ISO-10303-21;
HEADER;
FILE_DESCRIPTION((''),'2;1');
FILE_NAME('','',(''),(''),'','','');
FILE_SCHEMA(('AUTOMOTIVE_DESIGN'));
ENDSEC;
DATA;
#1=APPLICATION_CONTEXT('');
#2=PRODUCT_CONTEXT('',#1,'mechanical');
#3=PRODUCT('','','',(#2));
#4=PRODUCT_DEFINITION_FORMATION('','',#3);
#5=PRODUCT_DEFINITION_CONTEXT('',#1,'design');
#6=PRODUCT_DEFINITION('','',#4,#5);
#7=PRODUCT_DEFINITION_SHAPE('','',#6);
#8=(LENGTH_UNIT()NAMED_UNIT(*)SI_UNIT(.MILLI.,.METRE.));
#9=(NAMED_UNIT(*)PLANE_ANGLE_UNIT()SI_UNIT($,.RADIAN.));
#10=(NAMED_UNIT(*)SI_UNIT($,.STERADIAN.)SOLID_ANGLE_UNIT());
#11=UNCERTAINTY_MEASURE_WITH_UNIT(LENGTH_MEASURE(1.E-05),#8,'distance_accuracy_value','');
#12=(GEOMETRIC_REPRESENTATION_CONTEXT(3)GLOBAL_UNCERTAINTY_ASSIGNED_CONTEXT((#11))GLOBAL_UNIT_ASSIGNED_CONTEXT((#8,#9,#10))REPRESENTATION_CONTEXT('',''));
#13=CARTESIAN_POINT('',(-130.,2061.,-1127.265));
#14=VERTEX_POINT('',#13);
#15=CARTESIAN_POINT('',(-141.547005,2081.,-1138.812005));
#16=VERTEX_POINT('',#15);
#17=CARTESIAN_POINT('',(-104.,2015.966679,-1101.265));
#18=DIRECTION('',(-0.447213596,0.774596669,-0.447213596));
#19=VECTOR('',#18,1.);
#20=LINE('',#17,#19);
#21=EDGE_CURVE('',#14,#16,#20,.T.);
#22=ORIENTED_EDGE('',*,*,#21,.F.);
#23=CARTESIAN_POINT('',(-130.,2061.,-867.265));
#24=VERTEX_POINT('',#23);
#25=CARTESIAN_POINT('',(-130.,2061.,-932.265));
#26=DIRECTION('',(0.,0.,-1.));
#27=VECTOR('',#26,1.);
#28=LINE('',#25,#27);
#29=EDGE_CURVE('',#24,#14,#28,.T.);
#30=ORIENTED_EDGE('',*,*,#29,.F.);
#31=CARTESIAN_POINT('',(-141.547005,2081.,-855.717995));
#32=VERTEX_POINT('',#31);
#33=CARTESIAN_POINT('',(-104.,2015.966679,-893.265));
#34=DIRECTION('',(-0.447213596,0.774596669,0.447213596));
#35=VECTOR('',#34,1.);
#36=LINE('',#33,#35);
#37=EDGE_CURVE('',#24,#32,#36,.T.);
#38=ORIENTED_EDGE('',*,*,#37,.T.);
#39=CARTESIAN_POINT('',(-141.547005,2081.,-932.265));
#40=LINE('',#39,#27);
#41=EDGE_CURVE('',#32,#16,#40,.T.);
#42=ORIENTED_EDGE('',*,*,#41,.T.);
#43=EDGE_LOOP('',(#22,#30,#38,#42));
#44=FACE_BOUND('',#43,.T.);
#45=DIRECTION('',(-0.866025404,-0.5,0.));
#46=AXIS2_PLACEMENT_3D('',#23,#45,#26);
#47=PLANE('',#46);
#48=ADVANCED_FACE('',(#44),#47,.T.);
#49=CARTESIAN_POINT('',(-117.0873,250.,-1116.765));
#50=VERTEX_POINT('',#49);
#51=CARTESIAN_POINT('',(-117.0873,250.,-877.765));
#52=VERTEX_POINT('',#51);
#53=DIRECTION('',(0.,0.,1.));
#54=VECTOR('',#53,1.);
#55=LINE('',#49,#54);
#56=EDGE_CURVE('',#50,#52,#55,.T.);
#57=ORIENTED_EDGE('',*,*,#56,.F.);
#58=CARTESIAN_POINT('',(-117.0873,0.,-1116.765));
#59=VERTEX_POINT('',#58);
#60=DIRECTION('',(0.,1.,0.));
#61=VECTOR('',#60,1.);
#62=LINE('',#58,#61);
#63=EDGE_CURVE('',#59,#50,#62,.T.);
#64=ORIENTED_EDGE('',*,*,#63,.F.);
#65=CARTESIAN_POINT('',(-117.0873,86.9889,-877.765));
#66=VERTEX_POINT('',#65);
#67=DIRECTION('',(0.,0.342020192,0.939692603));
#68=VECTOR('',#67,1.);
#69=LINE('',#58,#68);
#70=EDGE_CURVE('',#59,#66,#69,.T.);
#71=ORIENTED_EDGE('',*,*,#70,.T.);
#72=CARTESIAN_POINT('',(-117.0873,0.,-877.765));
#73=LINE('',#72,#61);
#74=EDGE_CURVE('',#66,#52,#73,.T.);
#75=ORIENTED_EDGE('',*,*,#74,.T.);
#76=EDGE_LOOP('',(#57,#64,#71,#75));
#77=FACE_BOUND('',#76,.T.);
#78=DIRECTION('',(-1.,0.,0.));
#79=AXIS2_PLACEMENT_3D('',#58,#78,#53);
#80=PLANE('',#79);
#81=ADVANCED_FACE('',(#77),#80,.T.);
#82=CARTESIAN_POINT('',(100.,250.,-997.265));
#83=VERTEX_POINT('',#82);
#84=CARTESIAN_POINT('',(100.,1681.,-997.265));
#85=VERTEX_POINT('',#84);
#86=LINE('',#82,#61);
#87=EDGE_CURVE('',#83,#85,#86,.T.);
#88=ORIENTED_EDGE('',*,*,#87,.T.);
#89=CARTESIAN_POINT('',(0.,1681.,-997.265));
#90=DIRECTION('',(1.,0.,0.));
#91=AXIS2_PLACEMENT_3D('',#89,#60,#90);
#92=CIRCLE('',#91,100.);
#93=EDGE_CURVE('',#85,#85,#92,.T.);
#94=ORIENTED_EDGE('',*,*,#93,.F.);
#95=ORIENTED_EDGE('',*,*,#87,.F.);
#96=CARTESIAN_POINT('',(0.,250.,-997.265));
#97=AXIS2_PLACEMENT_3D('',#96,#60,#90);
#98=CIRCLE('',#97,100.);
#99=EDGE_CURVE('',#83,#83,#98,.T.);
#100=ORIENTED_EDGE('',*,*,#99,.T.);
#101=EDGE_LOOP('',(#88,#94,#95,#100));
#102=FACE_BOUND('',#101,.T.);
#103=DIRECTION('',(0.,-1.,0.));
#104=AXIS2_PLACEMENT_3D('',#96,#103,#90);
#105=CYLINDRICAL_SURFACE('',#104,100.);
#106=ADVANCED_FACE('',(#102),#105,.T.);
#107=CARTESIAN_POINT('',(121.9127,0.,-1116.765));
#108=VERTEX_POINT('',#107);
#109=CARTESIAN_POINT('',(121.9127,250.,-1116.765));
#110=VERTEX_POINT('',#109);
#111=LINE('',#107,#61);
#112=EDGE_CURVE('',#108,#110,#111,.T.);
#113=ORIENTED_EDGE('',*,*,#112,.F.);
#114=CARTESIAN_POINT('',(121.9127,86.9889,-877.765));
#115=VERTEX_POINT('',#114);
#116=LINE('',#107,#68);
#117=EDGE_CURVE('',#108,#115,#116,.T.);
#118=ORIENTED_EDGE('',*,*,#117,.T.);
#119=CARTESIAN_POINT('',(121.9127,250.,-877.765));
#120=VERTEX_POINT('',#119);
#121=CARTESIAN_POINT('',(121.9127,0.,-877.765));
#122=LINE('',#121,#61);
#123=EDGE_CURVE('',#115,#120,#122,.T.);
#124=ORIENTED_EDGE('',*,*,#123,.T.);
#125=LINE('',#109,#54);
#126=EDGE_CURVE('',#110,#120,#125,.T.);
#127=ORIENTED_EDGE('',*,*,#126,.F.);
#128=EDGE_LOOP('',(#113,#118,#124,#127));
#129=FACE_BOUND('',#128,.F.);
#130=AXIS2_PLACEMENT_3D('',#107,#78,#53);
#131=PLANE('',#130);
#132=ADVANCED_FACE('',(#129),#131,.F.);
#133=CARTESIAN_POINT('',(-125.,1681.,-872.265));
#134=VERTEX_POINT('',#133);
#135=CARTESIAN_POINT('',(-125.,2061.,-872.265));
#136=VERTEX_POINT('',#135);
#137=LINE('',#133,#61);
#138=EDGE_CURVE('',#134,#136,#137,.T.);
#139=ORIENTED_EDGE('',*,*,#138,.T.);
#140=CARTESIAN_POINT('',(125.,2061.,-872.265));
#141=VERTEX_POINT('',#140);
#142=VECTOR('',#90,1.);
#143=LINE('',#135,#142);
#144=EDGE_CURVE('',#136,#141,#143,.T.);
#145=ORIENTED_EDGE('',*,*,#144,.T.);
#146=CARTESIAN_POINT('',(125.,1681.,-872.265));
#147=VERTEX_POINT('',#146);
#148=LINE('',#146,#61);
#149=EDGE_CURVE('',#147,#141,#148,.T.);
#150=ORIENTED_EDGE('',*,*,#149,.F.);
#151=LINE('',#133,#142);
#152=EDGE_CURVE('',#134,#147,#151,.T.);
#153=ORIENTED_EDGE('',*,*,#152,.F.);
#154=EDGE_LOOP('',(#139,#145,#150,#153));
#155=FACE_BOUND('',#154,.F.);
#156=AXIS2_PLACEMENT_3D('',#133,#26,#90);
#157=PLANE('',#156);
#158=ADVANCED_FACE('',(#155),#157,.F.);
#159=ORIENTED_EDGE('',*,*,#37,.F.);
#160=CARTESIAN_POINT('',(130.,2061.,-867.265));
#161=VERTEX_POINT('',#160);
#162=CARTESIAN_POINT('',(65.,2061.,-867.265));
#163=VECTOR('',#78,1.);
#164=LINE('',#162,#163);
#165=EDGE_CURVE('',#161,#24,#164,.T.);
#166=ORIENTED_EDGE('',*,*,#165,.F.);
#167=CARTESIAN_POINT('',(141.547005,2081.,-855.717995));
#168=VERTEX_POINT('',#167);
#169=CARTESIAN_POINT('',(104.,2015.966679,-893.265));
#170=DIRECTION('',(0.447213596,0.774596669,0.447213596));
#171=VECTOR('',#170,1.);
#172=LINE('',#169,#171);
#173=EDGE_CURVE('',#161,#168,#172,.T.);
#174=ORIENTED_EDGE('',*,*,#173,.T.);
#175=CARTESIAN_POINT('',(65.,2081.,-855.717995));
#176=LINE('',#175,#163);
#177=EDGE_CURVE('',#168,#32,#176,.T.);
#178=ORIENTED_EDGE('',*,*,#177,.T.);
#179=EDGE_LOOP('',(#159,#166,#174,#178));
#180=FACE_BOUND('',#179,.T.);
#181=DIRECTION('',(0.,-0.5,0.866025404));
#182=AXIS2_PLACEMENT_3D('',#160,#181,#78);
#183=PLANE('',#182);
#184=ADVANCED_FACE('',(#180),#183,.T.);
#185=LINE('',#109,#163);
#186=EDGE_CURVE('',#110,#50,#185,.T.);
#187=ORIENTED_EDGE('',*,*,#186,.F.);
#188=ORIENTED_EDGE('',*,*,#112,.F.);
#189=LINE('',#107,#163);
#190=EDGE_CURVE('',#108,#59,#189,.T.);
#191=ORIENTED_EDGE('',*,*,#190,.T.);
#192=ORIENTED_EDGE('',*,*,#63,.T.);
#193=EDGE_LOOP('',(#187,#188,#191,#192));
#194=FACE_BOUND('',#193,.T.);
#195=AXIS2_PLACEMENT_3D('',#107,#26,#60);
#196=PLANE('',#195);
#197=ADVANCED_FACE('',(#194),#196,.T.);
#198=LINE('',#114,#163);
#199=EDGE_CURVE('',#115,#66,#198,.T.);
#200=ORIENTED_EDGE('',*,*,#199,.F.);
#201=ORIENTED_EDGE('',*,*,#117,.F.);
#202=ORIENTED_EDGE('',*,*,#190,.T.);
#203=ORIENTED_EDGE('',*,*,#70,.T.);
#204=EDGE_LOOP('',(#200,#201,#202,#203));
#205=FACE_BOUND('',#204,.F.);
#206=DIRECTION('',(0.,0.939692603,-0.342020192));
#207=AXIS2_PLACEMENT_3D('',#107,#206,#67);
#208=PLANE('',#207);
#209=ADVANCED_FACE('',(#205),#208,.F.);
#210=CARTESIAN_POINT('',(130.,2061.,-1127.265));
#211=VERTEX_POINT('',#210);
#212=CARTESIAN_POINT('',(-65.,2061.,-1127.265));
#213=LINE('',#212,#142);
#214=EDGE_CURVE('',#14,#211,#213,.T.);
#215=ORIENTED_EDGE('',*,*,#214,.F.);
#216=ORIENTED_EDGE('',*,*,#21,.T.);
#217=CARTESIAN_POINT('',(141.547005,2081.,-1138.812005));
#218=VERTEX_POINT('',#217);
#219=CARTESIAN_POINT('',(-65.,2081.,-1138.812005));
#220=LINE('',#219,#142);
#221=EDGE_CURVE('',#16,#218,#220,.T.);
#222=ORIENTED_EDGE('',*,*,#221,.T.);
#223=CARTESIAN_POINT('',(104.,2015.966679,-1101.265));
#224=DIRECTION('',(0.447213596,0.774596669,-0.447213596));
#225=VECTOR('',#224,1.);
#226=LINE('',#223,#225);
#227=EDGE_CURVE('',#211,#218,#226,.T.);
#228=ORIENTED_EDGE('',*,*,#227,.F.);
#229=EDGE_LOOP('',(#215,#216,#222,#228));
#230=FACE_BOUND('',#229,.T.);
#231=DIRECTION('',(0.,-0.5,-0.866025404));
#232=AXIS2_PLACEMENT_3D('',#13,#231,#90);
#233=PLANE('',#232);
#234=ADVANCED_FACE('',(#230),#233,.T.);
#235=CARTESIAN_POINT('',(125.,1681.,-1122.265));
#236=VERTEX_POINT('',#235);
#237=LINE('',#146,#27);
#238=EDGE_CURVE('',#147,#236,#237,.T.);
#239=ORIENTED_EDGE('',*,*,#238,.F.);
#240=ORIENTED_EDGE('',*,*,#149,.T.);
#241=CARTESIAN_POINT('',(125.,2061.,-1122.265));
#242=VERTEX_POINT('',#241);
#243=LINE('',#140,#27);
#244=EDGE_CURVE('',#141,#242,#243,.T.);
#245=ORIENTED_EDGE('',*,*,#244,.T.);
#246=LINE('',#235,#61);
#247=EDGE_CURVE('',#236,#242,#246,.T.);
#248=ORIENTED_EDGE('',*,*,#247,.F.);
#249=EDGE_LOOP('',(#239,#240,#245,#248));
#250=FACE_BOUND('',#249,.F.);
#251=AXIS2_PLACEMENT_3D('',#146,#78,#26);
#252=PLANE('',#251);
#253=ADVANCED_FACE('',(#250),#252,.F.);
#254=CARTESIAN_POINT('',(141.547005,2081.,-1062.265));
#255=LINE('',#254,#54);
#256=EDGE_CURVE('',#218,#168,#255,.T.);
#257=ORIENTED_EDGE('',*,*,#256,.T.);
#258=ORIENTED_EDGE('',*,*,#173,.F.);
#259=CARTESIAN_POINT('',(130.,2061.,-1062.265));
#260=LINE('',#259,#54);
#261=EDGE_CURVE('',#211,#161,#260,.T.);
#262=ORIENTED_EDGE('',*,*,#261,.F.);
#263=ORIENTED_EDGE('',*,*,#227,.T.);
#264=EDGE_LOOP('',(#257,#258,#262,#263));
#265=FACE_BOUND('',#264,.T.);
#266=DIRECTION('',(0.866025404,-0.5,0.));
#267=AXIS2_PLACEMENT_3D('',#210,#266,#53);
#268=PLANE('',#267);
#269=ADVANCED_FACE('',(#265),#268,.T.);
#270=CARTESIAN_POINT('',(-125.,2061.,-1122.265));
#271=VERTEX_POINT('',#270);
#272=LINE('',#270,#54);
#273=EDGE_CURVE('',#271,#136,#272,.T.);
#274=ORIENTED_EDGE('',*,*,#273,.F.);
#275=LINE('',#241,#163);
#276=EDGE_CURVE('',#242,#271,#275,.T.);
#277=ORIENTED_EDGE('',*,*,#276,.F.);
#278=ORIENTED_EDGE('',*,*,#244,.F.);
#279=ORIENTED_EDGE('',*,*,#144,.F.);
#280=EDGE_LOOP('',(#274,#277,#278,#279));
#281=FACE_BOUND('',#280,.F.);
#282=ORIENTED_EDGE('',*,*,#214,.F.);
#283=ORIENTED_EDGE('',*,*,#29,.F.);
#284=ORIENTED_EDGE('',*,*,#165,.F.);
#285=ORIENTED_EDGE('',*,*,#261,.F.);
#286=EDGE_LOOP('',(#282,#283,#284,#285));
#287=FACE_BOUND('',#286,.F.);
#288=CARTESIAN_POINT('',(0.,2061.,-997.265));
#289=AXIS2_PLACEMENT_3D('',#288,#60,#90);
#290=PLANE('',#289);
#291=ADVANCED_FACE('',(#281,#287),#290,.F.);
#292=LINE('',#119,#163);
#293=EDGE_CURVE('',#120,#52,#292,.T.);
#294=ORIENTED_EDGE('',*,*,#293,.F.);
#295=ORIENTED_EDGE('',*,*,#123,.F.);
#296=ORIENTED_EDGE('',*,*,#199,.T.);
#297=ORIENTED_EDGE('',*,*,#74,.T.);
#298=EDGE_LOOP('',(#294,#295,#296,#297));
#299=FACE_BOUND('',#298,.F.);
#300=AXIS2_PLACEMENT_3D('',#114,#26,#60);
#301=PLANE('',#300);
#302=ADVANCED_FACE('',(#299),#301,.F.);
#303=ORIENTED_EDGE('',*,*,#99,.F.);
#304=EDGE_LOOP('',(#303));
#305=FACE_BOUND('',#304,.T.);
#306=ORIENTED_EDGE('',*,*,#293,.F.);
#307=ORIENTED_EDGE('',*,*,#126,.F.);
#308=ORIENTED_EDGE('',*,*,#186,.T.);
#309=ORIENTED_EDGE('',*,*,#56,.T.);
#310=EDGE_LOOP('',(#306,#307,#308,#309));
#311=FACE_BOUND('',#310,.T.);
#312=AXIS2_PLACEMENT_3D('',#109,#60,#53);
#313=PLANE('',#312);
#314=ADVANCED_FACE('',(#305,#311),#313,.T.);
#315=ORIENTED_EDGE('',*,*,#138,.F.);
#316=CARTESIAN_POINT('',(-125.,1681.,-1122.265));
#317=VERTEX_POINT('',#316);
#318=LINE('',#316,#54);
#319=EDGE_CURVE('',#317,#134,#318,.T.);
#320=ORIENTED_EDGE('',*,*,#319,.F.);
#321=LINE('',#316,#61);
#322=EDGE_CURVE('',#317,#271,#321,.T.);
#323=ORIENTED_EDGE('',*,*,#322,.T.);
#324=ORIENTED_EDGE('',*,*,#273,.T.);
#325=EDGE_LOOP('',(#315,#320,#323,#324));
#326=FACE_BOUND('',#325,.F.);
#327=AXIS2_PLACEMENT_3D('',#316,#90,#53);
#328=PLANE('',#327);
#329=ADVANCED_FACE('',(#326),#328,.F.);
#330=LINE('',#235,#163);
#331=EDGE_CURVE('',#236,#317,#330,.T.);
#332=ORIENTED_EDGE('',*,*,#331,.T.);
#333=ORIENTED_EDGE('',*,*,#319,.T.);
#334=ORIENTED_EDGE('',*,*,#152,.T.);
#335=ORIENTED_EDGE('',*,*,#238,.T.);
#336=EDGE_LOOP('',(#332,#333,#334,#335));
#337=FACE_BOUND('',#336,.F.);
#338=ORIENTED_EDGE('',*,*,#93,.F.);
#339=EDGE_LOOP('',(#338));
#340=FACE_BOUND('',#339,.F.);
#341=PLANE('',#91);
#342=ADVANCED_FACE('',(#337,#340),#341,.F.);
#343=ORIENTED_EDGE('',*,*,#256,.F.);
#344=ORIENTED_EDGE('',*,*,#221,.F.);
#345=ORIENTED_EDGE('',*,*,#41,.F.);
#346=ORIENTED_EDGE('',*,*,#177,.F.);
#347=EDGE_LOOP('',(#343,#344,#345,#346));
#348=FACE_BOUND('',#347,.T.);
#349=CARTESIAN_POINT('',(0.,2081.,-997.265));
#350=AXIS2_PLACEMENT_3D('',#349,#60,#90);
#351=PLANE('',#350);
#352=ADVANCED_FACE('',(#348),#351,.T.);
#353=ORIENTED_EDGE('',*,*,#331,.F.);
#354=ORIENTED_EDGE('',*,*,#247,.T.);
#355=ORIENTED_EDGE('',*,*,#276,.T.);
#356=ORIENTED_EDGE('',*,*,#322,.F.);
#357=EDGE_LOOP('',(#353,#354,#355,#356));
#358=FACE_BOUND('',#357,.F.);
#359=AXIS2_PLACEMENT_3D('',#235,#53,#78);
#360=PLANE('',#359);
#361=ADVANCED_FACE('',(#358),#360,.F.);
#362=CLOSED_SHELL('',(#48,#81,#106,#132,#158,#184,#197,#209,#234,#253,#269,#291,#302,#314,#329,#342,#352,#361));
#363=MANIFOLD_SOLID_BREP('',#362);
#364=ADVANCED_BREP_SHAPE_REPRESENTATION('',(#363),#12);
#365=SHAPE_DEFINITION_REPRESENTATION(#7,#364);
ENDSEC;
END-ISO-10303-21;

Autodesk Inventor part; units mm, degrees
ref_plane "YZ Plane" through (0, 0, 0) normal (1, 0, 0) x (0, 1, 0)
ref_plane "XY Plane" through (0, 0, 0) normal (0, 0, 1) x (1, 0, 0)
sketch "Sketch1" plane through (0, 0, 0) normal (0, 1, 0) x (-1, 0, 0)
  line L0 (117.0873, -996.765) -> (117.0873, -877.765)
  line L1 (-121.9127, -877.765) -> (-121.9127, -996.765)
  line L2 (-121.9127, -1116.765) -> (-1.9127, -1116.765)
  line L3 (-2.9127, -1116.765) -> (117.0873, -1116.765)
  line L4 (117.0873, -996.765) -> (117.0873, -1116.765)
  line L5 (-121.9127, -996.765) -> (-121.9127, -1116.765)
  line L6 (117.0873, -1116.765) -> (-121.9127, -1116.765)
  line L7 (-121.9127, -1116.765) -> (-121.9127, -877.765)
  line L8 (-121.9127, -877.765) -> (117.0873, -877.765)
  line L9 (117.0873, -877.765) -> (117.0873, -1116.765)
  dimension "d0" = 239
ref_plane "Work Plane3" through (121.9127, 0, -1116.765) normal (-1, 0, 0) x (0, 0, 1)
ref_plane "Work Plane2" through (0, 0, 0) normal (0, 1, 0) x (-1, 0, 0)
sketch "Sketch2" plane through (121.9127, 0, -1116.765) normal (-1, 0, 0) x (0, 0, 1)
  line L0 (0, 0) -> (0, 3000)
  line L1 (239, 0) -> (239, 3000)
  line L2 (0, 0) -> (239, 86.9889)
  line L3 (0, 0) -> (254.3385, 0) construction
  line L4 (0, 0) -> (0, 250)
  line L5 (0, 250) -> (239, 250)
  line L6 (239, 250) -> (239, 86.9889)
  point P0 (1116.765, 0)
  dimension "d4" = 3000
  dimension "d5" = 3000
  dimension "d6" = 20
  dimension "d7" = 250
extrude "Extrusion1" add sketch "Sketch2" along normal blind 239
sketch "Sketch3" plane through (121.9127, 250, -877.765) normal (0, 1, 0) x (1, 0, 0)
  circle A0 centre (-121.9127, 119.5) radius 100
  point P0 (-121.9127, -877.765)
  dimension "d10" = 200
extrude "Extrusion2" add sketch "Sketch3" along normal blind 1431
sketch "Sketch4" plane through (0, 1681, -997.265) normal (0, 1, 0) x (1, 0, 0)
  line L0 (-125, -125) -> (125, -125)
  line L1 (125, -125) -> (125, 125)
  line L2 (125, 125) -> (-125, 125)
  line L3 (-125, 125) -> (-125, -125)
  line L4 (-125, -125) -> (125, 125) construction
  line L5 (125, -125) -> (-125, 125) construction
  point P0 (0, -997.265)
  point P1 (0, 0)
  point P2 (0, 0)
  point P3 (0, 0)
  dimension "d13" = 250
  dimension "d14" = 250
extrude "Extrusion3" add sketch "Sketch4" along normal blind 380
sketch "Sketch5" plane through (0, 2061, -997.265) normal (0, 1, 0) x (1, 0, 0)
  line L0 (130, -130) -> (-130, -130)
  line L1 (-130, -130) -> (-130, 130)
  line L2 (-130, 130) -> (130, 130)
  line L3 (130, 130) -> (130, -130)
  line L4 (130, -130) -> (-130, 130) construction
  line L5 (-130, -130) -> (130, 130) construction
  point P0 (0, -997.265)
  point P1 (0, 0)
  point P2 (0, 0)
  dimension "d17" = 260
  dimension "d18" = 260
extrude "Extrusion4" add sketch "Sketch5" along normal blind 20 draft 30
properties part number "side_pillar_01" material "Wood (Maple)"
